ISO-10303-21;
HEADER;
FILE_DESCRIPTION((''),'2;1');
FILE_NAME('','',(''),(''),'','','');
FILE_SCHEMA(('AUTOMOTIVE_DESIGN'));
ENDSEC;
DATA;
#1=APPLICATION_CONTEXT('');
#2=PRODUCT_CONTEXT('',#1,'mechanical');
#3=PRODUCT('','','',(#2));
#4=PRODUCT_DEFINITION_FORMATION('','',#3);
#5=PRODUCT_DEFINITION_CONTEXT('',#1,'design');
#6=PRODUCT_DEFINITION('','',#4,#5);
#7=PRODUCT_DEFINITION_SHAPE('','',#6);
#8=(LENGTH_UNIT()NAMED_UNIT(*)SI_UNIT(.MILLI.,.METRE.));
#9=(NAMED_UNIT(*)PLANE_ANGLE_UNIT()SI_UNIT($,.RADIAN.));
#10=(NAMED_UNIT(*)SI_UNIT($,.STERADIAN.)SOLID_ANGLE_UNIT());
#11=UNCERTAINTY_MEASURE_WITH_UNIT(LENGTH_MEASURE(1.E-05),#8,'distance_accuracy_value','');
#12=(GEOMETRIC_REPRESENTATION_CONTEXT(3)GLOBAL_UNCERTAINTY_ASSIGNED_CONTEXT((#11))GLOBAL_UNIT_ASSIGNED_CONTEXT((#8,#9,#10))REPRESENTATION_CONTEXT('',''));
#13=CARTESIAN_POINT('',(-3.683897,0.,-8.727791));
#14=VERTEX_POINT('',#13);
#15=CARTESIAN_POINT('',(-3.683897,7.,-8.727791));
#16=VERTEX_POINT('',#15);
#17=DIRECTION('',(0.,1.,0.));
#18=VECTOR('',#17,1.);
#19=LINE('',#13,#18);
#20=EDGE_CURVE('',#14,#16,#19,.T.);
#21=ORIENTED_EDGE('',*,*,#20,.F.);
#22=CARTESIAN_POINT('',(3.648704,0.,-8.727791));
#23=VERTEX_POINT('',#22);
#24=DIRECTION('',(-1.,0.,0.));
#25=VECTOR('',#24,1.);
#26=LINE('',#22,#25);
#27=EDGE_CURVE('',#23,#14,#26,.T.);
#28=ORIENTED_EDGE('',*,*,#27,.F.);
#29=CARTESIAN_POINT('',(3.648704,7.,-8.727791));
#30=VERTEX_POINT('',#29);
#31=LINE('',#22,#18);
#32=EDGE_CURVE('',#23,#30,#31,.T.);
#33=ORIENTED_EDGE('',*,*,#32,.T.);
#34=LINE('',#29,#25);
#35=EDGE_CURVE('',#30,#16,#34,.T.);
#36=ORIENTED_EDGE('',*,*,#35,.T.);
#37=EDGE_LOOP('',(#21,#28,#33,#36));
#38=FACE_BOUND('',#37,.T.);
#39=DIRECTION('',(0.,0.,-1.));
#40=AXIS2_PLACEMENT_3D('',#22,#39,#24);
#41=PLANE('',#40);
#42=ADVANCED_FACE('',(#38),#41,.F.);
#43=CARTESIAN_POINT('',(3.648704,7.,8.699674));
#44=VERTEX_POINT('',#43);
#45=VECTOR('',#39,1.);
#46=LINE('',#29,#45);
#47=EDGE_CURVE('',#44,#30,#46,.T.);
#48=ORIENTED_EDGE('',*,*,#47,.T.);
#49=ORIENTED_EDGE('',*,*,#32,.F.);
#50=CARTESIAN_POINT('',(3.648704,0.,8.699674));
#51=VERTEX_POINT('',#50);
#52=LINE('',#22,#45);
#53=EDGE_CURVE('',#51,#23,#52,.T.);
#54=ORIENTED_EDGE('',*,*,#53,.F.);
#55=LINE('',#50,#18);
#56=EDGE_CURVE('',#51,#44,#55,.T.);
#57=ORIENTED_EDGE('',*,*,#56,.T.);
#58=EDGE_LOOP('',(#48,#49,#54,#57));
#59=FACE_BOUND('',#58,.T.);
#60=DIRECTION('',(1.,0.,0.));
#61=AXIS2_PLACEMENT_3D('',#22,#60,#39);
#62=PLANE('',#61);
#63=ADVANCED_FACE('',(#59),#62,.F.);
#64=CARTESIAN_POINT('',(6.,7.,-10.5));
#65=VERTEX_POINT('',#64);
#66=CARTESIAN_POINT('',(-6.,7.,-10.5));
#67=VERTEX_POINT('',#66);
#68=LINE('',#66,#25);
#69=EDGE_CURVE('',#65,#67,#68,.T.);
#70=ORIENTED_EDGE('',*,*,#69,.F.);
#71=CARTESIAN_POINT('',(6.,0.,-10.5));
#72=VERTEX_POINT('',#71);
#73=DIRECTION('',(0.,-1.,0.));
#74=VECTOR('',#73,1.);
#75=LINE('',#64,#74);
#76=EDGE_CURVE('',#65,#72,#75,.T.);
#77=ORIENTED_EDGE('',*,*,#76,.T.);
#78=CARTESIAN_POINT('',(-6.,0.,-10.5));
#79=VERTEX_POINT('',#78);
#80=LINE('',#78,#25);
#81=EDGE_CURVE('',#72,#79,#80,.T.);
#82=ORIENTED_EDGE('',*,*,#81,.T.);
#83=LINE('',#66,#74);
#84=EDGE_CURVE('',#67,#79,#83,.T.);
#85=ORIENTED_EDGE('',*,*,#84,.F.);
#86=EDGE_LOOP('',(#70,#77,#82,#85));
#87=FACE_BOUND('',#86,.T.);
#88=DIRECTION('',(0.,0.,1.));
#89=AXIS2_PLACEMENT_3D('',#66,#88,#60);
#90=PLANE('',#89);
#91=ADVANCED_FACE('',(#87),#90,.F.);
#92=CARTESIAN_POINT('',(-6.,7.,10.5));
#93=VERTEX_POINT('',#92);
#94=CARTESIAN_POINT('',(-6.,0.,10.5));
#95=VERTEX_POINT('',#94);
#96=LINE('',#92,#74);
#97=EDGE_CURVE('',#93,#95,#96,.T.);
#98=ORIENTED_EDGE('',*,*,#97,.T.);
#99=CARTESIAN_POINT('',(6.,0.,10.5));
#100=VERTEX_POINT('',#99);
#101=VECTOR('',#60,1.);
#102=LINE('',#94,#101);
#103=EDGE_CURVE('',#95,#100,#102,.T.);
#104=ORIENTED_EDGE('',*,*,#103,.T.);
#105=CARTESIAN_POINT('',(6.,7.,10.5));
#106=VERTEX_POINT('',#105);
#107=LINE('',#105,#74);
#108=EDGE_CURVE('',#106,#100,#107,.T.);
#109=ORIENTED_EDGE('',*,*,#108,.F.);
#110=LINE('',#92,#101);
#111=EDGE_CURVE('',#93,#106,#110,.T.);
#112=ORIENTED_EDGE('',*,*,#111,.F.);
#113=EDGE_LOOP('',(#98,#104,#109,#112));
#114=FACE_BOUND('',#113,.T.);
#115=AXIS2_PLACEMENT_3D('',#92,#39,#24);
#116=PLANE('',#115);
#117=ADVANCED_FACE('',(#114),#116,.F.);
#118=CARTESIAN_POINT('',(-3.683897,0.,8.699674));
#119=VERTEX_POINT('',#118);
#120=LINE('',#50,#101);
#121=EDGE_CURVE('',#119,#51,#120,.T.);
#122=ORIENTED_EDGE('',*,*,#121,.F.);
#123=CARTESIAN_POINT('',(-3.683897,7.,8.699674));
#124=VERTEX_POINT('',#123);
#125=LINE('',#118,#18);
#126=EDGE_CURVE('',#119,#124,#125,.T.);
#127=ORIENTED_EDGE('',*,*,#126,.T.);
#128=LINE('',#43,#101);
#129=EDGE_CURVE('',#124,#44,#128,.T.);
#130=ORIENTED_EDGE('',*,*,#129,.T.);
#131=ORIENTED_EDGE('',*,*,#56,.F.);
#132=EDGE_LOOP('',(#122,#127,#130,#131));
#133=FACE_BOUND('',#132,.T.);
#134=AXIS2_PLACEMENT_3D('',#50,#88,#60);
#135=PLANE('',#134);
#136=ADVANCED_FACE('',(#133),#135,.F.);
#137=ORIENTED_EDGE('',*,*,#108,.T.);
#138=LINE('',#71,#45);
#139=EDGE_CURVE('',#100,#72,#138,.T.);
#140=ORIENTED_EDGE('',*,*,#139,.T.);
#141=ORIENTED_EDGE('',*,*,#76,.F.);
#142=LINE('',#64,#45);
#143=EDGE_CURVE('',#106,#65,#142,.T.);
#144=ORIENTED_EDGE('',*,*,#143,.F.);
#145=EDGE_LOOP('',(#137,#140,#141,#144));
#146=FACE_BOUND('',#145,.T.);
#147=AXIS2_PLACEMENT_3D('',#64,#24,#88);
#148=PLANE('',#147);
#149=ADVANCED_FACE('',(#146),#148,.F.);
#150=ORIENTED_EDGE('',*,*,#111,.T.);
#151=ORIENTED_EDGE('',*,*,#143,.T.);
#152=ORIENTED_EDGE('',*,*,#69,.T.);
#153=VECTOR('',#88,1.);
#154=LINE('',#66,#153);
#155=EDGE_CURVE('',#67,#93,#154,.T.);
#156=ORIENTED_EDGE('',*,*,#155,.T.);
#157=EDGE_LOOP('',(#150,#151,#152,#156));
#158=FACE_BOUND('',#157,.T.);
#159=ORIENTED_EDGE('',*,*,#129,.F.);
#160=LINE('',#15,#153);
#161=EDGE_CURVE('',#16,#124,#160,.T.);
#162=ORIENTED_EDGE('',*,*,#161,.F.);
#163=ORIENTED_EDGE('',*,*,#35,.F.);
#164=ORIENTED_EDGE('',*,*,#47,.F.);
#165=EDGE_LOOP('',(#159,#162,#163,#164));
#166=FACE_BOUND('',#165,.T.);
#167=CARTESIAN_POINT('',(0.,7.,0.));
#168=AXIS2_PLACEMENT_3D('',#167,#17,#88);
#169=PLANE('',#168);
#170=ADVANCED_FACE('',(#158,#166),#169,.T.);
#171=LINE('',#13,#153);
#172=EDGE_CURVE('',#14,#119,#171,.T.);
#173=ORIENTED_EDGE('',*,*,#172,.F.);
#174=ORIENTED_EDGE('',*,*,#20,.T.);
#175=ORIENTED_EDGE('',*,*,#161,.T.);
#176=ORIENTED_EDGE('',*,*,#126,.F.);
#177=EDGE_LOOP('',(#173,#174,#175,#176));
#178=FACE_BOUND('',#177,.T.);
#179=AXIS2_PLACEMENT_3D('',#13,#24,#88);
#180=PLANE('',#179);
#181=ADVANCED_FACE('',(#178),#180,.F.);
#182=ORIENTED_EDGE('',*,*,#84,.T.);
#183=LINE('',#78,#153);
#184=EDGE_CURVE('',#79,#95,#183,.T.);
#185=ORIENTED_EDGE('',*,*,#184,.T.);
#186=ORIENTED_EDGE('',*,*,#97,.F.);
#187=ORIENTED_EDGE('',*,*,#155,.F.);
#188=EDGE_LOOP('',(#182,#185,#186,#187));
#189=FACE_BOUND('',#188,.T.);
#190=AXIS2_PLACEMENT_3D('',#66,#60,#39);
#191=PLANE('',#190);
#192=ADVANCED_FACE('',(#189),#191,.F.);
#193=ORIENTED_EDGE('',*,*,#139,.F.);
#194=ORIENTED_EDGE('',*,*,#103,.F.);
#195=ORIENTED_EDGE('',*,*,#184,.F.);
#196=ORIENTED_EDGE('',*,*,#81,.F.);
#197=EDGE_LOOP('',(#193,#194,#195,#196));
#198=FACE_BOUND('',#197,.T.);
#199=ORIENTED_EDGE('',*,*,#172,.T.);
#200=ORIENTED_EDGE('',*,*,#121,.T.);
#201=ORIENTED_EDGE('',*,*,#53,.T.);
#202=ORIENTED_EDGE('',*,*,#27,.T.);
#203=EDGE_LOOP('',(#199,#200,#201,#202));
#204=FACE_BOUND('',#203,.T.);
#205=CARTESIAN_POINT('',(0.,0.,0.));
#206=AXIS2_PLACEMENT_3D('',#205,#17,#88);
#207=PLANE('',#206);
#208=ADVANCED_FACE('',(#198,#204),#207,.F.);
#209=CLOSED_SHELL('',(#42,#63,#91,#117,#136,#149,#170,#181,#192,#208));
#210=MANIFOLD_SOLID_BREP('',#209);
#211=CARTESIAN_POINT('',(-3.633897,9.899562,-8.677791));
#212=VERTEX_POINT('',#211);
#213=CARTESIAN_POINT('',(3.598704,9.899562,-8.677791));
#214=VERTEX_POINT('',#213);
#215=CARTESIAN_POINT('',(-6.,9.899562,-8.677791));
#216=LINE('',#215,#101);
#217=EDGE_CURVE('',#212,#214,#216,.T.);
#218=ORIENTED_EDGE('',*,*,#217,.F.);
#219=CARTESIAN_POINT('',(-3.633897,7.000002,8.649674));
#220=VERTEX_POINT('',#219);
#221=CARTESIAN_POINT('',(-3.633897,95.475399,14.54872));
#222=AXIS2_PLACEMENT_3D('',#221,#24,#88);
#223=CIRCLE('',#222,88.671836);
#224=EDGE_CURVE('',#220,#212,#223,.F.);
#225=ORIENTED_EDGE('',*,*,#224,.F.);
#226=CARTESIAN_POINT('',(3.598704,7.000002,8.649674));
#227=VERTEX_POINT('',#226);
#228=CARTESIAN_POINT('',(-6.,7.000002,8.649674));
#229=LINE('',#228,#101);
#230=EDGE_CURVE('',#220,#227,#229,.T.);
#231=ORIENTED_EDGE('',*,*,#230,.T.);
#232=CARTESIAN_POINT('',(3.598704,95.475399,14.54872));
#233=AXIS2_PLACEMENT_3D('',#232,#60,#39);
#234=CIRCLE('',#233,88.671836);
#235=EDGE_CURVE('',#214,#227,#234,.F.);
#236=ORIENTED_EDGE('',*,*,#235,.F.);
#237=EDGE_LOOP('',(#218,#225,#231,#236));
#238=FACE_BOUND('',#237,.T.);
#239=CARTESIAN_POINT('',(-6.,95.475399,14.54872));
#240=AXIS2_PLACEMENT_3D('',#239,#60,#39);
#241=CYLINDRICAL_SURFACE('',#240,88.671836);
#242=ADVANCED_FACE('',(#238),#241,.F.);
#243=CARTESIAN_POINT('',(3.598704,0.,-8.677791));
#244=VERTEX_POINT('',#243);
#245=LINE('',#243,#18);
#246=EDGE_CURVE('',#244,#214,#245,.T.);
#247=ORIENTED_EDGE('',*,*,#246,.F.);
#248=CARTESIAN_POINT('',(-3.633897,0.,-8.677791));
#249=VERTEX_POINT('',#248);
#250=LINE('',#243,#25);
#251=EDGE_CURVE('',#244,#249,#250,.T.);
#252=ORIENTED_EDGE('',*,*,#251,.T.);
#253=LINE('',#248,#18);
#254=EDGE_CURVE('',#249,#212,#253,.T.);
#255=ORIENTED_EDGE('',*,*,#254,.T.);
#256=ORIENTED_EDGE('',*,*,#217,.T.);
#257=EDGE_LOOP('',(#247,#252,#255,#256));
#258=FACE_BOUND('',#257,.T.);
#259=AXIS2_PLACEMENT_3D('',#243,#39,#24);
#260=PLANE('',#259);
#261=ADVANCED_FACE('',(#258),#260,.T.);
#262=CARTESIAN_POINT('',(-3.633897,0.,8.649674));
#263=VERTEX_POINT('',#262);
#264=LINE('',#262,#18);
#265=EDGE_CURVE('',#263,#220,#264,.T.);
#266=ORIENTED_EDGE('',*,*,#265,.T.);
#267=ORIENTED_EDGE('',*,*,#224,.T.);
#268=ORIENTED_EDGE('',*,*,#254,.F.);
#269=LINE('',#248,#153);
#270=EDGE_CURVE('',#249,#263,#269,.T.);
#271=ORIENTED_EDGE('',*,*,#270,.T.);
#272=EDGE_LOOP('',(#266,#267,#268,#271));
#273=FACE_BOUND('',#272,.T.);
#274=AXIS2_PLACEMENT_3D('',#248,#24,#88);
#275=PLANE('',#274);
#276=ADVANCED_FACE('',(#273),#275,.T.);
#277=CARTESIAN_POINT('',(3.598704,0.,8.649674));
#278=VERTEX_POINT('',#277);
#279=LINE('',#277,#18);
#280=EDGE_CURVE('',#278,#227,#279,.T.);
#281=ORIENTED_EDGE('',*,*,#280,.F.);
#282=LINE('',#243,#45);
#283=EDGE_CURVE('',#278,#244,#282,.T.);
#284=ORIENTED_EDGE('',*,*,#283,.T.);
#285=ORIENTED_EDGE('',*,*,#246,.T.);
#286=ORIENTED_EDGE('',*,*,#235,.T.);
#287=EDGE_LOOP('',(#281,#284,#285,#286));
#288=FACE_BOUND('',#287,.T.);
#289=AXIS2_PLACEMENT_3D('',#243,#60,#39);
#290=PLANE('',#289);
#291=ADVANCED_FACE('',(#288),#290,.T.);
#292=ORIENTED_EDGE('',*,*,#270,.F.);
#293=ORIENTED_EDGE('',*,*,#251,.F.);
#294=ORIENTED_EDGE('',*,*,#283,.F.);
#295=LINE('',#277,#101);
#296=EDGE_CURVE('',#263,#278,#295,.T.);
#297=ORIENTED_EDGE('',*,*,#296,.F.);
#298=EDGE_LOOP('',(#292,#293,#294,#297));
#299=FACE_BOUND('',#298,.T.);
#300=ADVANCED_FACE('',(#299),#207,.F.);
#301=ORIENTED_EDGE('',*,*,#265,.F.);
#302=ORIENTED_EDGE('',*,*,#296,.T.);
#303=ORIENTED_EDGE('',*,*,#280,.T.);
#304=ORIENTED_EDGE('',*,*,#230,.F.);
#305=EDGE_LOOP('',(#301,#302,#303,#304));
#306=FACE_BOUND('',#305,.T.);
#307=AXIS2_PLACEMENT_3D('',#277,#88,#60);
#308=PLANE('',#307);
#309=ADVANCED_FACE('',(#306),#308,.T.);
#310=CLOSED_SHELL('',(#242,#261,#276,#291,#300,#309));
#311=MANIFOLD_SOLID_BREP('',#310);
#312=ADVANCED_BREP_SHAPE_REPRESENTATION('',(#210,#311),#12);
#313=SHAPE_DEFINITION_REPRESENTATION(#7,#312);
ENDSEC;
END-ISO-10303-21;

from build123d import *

# Parameters (mm, degrees)
SKETCH1_W           = 12
SKETCH1_H           = 21
BOSS_EXTRUDE1_DEPTH = 7
SKETCH3_W           = 7.332600984
SKETCH3_H           = 17.427465336
SKETCH3_W_2         = 7.232600984
SKETCH3_H_2         = 17.327465336
CUT_EXTRUDE1_DEPTH  = 7
SKETCH4_W           = 7.232600984
SKETCH4_H           = 17.327465336
BOSS_EXTRUDE3_DEPTH = 7
CUT_EXTRUDE3_START  = -7.232600984
CUT_EXTRUDE3_DEPTH  = 7.232600984


# Read off the part's stored shape, not the designer's step: Cut-Extrude3
with BuildPart() as part:
    # Sketch1 → Boss-Extrude1 (new body)
    with BuildSketch(Plane(origin=(0, 0, 0), x_dir=(1, 0, 0), z_dir=(0, 1, 0))):
        Rectangle(SKETCH1_W, SKETCH1_H)
    extrude(amount=BOSS_EXTRUDE1_DEPTH)

    # Sketch3 → Cut-Extrude1 (cut)
    with BuildSketch(Plane(origin=(0, 7, 0), x_dir=(1, 0, 0), z_dir=(0, 1, 0))):
        with Locations((-0.017596075, 0.014058571)):
            Rectangle(SKETCH3_W, SKETCH3_H)
        with Locations((-0.017596075, 0.014058571)):
            Rectangle(SKETCH3_W_2, SKETCH3_H_2, mode=Mode.SUBTRACT)
    extrude(amount=-CUT_EXTRUDE1_DEPTH, mode=Mode.SUBTRACT)


with BuildPart() as cut_extrude1_piece_1:
    # of the separate pieces the step leaves, piece 1, a body of its own (cut_extrude1_pieces)
    add(part.part.solids().sort_by_distance((3.598704417, 0, 8.649674097))[0])

    # Sketch4 → Boss-Extrude3 (add)
    with BuildSketch(Plane(origin=(0, 7, 0), x_dir=(1, 0, 0), z_dir=(0, 1, 0))):
        with Locations((-0.017596075, 0.014058571)):
            Rectangle(SKETCH4_W, SKETCH4_H)
    extrude(amount=BOSS_EXTRUDE3_DEPTH)

    # Cut-Extrude3 outline → Cut-Extrude3 (cut)
    with BuildSketch(Plane(origin=(3.598704417, 0, 0), x_dir=(0, 0, -1), z_dir=(1, 0, 0)).offset(CUT_EXTRUDE3_START)):
        with BuildLine():
            Line((-8.649674097, 14), (-8.649674097, 7.000001761))
            ThreePointArc((-8.649674097, 7.000001761), (0.086046227, 8.019591461), (8.677791239, 9.89956231))
            Line((8.677791239, 9.89956231), (8.677791239, 14))
            Line((8.677791239, 14), (-8.649674097, 14))
        make_face()
    extrude(amount=CUT_EXTRUDE3_DEPTH, mode=Mode.SUBTRACT)


with BuildPart() as cut_extrude1_piece_2:
    # of the separate pieces the step leaves, piece 2, a body of its own (cut_extrude1_pieces)
    add(part.part.solids().sort_by_distance((-6, 0, -10.5))[0])


solid = Compound([cut_extrude1_piece_1.part, cut_extrude1_piece_2.part])
